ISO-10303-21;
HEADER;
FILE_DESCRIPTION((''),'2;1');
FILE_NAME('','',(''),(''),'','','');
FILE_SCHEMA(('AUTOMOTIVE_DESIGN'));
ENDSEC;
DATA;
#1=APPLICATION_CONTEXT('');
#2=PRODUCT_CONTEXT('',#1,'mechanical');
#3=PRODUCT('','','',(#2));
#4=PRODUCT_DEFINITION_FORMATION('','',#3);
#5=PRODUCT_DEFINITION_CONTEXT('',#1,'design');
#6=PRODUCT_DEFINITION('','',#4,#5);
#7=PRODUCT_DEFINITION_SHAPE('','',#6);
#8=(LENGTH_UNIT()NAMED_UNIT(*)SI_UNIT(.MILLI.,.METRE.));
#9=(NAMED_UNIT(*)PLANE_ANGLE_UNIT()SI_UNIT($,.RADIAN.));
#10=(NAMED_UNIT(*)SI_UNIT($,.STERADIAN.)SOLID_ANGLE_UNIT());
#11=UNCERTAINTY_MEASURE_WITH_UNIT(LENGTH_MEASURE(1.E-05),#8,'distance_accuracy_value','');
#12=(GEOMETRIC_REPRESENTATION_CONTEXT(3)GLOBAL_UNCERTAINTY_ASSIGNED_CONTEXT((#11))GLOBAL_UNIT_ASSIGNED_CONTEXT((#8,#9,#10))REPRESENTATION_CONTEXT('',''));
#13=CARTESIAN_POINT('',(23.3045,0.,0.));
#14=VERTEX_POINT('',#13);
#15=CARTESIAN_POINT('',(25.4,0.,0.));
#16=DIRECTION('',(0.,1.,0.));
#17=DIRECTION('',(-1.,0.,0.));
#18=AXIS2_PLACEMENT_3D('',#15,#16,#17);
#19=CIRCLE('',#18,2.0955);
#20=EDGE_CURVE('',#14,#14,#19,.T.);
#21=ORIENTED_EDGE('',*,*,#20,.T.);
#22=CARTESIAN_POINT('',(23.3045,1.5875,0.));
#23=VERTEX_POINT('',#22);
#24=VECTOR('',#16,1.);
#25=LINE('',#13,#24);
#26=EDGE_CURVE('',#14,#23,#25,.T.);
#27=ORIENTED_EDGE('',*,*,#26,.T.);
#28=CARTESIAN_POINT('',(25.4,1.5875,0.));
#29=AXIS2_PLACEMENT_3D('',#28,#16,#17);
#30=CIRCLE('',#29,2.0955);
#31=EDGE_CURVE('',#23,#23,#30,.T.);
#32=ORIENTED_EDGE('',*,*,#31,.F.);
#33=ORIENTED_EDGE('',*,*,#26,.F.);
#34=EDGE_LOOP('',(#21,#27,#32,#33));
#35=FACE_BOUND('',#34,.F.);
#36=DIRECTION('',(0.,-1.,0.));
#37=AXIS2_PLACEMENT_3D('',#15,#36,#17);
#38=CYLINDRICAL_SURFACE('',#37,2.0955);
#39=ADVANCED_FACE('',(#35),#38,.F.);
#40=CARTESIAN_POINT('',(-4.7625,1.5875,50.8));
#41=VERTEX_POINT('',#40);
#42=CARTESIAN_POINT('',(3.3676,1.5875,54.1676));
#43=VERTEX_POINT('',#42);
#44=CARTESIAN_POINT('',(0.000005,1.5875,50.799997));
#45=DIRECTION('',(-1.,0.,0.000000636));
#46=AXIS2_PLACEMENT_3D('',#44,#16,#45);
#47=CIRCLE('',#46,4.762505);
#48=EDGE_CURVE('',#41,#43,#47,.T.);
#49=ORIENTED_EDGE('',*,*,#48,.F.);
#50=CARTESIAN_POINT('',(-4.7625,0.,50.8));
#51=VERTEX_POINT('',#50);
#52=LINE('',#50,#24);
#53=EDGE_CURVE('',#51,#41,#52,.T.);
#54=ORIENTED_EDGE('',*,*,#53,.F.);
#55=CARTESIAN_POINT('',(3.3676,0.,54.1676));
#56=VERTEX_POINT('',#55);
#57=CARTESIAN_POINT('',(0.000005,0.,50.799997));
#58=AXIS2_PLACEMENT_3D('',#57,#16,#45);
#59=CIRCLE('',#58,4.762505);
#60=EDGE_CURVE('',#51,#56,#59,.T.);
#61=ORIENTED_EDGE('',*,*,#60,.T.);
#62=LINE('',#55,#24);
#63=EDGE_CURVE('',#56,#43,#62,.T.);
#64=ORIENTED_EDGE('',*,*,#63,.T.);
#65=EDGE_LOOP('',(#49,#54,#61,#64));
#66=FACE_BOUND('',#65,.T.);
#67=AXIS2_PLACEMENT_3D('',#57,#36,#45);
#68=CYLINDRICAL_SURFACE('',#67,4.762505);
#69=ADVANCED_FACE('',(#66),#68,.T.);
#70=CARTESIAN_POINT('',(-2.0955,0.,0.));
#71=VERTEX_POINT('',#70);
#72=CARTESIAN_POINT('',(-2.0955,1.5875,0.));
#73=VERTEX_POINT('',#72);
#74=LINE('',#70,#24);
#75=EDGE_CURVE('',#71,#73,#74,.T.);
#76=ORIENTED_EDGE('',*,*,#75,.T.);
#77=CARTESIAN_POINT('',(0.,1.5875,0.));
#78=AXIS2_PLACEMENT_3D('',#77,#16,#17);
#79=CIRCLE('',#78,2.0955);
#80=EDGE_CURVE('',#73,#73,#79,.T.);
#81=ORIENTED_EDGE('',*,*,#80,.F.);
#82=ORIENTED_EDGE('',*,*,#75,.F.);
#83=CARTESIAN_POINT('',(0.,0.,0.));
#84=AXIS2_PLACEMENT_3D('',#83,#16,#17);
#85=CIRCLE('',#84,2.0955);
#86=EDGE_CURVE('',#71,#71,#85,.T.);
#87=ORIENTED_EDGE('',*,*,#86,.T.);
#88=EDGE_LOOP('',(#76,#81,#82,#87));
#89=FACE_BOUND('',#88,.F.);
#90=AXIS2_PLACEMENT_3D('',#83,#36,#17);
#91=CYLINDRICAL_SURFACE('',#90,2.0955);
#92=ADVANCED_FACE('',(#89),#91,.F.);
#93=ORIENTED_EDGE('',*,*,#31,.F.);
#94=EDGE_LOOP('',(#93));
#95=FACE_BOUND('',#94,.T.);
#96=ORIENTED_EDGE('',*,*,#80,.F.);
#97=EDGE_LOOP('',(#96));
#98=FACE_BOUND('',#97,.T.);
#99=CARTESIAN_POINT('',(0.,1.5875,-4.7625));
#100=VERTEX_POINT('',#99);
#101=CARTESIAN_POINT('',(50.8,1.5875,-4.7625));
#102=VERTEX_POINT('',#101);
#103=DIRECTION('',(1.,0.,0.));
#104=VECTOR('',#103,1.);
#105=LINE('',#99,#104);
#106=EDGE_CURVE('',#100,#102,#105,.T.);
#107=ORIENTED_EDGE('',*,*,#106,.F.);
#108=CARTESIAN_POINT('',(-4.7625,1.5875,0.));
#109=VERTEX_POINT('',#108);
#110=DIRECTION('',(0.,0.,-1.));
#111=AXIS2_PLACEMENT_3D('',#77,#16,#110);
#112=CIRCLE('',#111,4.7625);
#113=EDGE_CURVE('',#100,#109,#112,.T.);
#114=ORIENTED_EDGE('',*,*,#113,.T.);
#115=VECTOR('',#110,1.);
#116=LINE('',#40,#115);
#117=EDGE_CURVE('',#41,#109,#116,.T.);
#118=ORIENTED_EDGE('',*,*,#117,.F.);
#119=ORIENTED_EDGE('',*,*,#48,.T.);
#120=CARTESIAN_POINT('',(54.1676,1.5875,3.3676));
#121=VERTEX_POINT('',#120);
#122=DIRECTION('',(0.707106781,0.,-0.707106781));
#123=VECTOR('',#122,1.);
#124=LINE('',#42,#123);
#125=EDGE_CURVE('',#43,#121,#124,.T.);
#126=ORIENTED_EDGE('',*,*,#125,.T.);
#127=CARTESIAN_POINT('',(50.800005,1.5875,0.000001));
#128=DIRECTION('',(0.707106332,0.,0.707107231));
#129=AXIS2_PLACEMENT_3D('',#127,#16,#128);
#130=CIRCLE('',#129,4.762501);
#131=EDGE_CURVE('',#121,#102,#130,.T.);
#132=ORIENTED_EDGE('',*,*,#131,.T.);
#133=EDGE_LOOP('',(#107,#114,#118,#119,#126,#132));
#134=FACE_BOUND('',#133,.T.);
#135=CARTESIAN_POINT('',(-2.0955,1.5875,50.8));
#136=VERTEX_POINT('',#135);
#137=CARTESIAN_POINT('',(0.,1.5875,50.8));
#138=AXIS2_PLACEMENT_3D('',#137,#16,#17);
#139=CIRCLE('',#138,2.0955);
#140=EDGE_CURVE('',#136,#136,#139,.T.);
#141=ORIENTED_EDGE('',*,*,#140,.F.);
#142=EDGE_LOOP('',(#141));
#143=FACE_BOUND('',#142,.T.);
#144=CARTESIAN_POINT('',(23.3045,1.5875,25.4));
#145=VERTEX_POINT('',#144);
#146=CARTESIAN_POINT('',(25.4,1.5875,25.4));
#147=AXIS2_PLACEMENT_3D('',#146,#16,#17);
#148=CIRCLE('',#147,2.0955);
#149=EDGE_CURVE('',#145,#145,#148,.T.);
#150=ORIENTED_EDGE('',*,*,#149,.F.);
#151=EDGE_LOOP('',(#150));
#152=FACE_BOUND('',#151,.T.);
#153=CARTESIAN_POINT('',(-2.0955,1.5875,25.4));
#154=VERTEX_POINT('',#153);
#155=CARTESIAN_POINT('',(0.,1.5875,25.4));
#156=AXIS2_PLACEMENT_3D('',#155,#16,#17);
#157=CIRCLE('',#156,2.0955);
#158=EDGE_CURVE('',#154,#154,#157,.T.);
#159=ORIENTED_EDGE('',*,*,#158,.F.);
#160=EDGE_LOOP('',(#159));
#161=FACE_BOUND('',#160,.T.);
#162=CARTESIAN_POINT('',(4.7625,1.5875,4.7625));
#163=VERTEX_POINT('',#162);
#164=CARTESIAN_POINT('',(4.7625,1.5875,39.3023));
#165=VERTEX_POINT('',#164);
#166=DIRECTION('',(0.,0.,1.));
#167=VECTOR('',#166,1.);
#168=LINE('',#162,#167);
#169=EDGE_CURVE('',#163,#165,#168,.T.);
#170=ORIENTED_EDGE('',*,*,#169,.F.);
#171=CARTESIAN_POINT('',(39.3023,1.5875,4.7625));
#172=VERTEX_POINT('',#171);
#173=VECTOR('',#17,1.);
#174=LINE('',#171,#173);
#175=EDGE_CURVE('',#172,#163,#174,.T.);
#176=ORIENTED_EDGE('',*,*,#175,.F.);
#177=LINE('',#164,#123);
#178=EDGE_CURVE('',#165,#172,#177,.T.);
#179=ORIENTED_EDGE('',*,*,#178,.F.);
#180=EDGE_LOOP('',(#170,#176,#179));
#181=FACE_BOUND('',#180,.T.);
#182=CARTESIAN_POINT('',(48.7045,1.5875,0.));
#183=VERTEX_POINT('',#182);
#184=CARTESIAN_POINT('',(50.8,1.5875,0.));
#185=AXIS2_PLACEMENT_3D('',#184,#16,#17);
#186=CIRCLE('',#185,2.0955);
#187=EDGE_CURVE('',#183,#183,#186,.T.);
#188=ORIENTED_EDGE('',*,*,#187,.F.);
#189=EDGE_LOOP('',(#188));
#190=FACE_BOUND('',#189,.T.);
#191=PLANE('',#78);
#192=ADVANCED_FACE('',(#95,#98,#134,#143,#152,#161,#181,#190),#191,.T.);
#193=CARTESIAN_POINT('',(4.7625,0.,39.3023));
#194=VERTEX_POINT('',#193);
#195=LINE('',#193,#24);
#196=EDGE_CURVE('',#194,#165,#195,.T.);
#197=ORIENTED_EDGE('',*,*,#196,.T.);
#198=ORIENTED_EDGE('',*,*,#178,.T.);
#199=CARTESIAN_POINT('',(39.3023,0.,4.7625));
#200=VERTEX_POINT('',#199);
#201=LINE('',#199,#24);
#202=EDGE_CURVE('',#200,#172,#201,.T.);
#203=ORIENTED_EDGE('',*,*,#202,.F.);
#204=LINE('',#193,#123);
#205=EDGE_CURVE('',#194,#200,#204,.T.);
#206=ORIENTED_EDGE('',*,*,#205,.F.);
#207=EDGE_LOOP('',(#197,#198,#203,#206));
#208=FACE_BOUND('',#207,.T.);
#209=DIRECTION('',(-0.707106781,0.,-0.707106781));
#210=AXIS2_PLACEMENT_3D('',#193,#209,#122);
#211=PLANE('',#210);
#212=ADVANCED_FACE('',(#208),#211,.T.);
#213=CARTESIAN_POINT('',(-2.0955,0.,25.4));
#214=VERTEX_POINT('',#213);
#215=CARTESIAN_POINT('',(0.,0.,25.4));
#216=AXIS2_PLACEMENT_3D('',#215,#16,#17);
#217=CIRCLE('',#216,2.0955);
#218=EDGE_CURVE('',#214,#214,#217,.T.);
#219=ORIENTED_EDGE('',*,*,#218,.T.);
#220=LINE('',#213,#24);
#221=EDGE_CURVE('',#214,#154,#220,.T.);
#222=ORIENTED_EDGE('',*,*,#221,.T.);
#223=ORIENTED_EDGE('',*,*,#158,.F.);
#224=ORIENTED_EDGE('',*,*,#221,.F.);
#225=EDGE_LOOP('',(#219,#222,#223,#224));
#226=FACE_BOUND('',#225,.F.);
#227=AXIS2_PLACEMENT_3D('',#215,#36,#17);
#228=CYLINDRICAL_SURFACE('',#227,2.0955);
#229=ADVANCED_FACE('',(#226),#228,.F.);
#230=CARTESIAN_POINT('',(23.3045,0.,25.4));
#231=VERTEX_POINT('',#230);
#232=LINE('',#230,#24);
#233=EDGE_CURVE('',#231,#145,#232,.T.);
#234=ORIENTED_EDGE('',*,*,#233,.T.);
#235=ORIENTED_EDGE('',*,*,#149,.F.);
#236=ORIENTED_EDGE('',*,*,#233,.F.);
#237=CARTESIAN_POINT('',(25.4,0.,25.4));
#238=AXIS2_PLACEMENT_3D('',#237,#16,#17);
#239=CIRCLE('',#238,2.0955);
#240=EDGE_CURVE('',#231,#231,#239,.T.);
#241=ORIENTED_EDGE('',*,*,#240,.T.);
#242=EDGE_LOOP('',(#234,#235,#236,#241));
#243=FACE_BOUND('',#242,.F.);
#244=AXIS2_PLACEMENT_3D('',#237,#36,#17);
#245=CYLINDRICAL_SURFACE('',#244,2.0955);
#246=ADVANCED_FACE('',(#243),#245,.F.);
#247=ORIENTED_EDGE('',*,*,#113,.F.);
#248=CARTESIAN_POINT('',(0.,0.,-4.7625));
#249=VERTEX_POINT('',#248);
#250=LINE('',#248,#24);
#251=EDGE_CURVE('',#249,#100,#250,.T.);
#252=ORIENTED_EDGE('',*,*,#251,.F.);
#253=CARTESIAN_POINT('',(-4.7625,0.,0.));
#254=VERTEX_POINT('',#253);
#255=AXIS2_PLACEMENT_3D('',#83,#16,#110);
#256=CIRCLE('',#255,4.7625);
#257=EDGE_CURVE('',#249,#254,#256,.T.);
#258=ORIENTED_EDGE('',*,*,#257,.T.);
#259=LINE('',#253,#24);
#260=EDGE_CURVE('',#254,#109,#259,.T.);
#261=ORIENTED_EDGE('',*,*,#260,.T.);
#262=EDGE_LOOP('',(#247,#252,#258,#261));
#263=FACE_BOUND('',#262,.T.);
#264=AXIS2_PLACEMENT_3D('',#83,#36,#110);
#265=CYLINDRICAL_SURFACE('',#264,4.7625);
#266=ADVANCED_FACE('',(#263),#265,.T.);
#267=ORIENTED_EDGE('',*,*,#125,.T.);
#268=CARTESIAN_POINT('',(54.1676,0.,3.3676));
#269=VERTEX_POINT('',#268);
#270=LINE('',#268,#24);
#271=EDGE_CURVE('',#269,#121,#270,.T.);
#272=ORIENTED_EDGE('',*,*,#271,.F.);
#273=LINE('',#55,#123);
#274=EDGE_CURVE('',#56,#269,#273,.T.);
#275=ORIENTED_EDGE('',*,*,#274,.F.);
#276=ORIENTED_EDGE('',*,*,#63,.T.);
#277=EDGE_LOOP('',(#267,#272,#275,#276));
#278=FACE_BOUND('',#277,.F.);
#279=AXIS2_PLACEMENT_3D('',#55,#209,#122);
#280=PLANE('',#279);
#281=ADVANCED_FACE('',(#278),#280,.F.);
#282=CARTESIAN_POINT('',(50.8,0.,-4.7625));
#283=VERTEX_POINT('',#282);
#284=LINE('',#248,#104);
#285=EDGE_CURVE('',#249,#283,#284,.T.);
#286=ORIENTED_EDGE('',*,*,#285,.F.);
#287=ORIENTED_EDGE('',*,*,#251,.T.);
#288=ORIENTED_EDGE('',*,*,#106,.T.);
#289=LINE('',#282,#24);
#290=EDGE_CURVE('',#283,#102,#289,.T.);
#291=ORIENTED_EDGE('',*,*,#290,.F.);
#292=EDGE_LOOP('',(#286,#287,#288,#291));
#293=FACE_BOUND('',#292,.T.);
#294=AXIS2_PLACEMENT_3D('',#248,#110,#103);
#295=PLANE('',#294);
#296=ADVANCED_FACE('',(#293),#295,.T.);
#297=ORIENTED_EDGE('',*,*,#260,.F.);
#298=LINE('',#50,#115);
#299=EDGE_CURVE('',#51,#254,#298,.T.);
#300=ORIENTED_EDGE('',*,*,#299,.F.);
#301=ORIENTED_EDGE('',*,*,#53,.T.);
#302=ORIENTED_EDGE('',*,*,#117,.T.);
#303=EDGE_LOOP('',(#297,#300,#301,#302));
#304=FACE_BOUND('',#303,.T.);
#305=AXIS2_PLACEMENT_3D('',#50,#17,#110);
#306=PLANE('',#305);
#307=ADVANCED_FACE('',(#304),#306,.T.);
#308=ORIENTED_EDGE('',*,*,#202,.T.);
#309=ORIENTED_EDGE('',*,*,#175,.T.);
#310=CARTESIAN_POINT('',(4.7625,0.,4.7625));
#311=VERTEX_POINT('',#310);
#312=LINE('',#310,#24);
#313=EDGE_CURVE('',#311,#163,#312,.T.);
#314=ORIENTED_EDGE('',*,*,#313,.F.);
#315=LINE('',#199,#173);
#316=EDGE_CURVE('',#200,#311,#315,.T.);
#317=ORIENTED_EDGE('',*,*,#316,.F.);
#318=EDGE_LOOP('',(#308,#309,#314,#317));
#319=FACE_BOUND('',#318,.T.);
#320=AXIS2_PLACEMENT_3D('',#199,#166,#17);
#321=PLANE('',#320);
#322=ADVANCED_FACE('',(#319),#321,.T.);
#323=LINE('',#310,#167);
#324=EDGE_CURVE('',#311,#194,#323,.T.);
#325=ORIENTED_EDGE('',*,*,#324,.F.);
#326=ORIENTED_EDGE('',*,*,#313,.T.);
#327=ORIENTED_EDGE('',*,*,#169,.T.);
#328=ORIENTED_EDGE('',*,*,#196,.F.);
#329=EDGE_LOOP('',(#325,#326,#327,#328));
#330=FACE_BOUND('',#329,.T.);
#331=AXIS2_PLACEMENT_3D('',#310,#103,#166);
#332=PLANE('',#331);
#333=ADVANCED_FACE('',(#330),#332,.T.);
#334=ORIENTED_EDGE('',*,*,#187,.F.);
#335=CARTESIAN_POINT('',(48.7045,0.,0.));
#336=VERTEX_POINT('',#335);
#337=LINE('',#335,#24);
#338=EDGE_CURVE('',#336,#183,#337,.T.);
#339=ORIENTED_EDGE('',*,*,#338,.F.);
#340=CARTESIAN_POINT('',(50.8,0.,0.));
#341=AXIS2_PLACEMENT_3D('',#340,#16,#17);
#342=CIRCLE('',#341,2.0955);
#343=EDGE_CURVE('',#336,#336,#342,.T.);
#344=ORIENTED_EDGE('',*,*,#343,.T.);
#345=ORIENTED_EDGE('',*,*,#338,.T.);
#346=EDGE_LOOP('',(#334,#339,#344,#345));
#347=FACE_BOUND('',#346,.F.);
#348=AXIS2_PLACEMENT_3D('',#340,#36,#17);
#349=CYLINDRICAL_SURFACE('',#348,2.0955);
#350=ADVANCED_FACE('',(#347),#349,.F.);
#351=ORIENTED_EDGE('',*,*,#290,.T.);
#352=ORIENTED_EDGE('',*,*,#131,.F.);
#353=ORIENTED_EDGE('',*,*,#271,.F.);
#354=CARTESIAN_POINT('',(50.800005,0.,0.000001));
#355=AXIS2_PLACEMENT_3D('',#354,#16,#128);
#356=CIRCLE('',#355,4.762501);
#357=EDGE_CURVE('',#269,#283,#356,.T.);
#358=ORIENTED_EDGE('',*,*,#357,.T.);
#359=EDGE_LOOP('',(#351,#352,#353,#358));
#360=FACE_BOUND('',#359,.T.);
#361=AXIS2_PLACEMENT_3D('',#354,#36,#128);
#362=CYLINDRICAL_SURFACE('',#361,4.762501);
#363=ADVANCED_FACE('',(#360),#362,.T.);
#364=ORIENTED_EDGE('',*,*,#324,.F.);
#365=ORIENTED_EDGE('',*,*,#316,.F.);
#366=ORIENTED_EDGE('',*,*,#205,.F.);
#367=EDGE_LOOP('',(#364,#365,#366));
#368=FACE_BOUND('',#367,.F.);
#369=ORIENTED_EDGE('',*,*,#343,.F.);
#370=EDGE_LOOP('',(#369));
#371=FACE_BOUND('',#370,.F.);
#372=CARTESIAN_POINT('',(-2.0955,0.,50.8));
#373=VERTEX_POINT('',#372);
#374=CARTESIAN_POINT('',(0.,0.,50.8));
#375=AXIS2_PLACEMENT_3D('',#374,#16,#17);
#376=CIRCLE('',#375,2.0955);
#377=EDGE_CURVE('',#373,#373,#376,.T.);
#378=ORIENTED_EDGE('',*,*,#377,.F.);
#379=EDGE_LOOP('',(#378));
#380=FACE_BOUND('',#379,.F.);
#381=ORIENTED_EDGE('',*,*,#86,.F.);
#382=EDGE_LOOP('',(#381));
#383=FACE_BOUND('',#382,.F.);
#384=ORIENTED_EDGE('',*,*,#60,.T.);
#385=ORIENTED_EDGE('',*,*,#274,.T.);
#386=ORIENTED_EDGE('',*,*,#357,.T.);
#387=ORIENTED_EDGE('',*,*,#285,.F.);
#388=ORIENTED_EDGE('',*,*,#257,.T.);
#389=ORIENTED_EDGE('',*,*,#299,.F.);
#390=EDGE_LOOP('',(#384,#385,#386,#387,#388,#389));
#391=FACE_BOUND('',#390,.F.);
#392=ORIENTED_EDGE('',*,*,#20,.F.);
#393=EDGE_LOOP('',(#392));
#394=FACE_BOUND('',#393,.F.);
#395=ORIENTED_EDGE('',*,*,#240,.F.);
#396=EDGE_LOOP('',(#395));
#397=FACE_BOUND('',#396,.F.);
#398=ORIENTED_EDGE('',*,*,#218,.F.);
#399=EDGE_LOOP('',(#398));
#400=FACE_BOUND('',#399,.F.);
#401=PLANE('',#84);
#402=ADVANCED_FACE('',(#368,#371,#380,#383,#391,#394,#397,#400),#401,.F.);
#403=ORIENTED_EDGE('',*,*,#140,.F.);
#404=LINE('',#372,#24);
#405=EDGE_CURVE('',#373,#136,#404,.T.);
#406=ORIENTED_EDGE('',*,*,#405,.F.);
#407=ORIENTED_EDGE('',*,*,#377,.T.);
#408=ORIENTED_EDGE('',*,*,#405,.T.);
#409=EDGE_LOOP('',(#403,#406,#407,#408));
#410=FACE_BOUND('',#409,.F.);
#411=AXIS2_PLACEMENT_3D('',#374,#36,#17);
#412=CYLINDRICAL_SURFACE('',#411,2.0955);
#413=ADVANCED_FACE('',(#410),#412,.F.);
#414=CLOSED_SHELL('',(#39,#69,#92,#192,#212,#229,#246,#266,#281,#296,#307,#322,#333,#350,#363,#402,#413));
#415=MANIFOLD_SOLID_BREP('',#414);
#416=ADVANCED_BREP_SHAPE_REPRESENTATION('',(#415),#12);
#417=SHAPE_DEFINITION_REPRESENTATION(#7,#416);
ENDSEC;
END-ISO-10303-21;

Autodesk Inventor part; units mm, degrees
ref_plane "YZ Plane" through (0, 0, 0) normal (1, 0, 0) x (0, 1, 0)
ref_plane "XZ Plane" through (0, 0, 0) normal (0, 1, 0) x (-1, 0, 0)
ref_plane "XY Plane" through (0, 0, 0) normal (0, 0, 1) x (1, 0, 0)
sketch "main" plane through (0, 0, 0) normal (0, 0, 1) x (1, 0, 0)
  circle A0 centre (27.8145, 23.5161) radius 2.0955
  circle A1 centre (27.8145, -27.2839) radius 2.0955
  circle A2 centre (-22.9855, -27.2839) radius 2.0955
  arc A3 (-26.3531, -23.9163) -> (-22.9855, -32.0464) centre (-22.9855, -27.2839) ccw
  arc A4 (27.8145, -32.0464) -> (32.577, -27.2839) centre (27.8145, -27.2839) ccw
  arc A5 (32.577, 23.5161) -> (24.4469, 26.8837) centre (27.8145, 23.5161) ccw
  line L0 (32.577, 23.5161) -> (32.577, -27.2839)
  line L1 (27.8145, -32.0464) -> (-22.9855, -32.0464)
  line L2 (24.4469, 26.8837) -> (-26.3531, -23.9163)
  line L3 (-11.4879, -22.5214) -> (23.052, -22.5214)
  line L4 (23.052, -22.5214) -> (23.052, 12.0184)
  line L5 (23.052, 12.0184) -> (-11.4879, -22.5214)
  circle A6 centre (2.4145, -1.8839) radius 2.0955
  point P0 (11.2944, -10.7639)
  dimension "d3" = 4.191
  dimension "d4" = 4.191
  dimension "d5" = 4.191
  dimension "d7" = 9.525
  dimension "d8" = 4.191
  dimension "d9" = 4.7625
  dimension "d10" = 4.7625
  dimension "d11" = 4.7625
sketch "Sketch1" plane through (0, 0, 0) normal (0, 1, 0) x (-1, 0, 0)
  circle A0 centre (-25.4, 0) radius 2.0955
  circle A1 centre (0, 25.4) radius 2.0955
  circle A2 centre (0, 50.8) radius 2.0955
  circle A3 centre (0, 0) radius 2.0955
  circle A4 centre (-50.8, 0) radius 2.0955
  arc A5 (-54.1676, 3.3676) -> (-50.8, -4.7625) centre (-50.8, 0) ccw
  arc A6 (0, -4.7625) -> (4.7625, 0) centre (0, 0) ccw
  arc A7 (4.7625, 50.8) -> (-3.3676, 54.1676) centre (0, 50.8) ccw
  line L0 (4.7625, 50.8) -> (4.7625, 0)
  line L1 (0, -4.7625) -> (-50.8, -4.7625)
  line L2 (-3.3676, 54.1676) -> (-54.1676, 3.3676)
  line L3 (-39.3023, 4.7625) -> (-4.7625, 4.7625)
  line L4 (-4.7625, 4.7625) -> (-4.7625, 39.3023)
  line L5 (-4.7625, 39.3023) -> (-39.3023, 4.7625)
  circle A8 centre (-25.4, 25.4) radius 2.0955
  dimension "d2" = 4.191
  dimension "d6" = 4.191
extrude "Extrusion1" add sketch "Sketch1" along normal blind 1.5875
equation "\"BendRadius\" = Thickness"
equation "\"BendReliefWidth\" = Thickness"
equation "\"BendReliefDepth\" = 0.5 * Thickness"
equation "\"CornerReliefSize\" = 4 * Thickness"
equation "\"MinimumRemnant\" = 2 * Thickness"
equation "\"TransitionRadius\" = BendRadius"
equation "\"JacobiRadiusSize\" = BendRadius"
equation "\"GapSize\" = Thickness"
equation "\"Thickness\" = 1.5875"
properties part number "Arm Triangle Gusset" material "Acetal Resin, White"
